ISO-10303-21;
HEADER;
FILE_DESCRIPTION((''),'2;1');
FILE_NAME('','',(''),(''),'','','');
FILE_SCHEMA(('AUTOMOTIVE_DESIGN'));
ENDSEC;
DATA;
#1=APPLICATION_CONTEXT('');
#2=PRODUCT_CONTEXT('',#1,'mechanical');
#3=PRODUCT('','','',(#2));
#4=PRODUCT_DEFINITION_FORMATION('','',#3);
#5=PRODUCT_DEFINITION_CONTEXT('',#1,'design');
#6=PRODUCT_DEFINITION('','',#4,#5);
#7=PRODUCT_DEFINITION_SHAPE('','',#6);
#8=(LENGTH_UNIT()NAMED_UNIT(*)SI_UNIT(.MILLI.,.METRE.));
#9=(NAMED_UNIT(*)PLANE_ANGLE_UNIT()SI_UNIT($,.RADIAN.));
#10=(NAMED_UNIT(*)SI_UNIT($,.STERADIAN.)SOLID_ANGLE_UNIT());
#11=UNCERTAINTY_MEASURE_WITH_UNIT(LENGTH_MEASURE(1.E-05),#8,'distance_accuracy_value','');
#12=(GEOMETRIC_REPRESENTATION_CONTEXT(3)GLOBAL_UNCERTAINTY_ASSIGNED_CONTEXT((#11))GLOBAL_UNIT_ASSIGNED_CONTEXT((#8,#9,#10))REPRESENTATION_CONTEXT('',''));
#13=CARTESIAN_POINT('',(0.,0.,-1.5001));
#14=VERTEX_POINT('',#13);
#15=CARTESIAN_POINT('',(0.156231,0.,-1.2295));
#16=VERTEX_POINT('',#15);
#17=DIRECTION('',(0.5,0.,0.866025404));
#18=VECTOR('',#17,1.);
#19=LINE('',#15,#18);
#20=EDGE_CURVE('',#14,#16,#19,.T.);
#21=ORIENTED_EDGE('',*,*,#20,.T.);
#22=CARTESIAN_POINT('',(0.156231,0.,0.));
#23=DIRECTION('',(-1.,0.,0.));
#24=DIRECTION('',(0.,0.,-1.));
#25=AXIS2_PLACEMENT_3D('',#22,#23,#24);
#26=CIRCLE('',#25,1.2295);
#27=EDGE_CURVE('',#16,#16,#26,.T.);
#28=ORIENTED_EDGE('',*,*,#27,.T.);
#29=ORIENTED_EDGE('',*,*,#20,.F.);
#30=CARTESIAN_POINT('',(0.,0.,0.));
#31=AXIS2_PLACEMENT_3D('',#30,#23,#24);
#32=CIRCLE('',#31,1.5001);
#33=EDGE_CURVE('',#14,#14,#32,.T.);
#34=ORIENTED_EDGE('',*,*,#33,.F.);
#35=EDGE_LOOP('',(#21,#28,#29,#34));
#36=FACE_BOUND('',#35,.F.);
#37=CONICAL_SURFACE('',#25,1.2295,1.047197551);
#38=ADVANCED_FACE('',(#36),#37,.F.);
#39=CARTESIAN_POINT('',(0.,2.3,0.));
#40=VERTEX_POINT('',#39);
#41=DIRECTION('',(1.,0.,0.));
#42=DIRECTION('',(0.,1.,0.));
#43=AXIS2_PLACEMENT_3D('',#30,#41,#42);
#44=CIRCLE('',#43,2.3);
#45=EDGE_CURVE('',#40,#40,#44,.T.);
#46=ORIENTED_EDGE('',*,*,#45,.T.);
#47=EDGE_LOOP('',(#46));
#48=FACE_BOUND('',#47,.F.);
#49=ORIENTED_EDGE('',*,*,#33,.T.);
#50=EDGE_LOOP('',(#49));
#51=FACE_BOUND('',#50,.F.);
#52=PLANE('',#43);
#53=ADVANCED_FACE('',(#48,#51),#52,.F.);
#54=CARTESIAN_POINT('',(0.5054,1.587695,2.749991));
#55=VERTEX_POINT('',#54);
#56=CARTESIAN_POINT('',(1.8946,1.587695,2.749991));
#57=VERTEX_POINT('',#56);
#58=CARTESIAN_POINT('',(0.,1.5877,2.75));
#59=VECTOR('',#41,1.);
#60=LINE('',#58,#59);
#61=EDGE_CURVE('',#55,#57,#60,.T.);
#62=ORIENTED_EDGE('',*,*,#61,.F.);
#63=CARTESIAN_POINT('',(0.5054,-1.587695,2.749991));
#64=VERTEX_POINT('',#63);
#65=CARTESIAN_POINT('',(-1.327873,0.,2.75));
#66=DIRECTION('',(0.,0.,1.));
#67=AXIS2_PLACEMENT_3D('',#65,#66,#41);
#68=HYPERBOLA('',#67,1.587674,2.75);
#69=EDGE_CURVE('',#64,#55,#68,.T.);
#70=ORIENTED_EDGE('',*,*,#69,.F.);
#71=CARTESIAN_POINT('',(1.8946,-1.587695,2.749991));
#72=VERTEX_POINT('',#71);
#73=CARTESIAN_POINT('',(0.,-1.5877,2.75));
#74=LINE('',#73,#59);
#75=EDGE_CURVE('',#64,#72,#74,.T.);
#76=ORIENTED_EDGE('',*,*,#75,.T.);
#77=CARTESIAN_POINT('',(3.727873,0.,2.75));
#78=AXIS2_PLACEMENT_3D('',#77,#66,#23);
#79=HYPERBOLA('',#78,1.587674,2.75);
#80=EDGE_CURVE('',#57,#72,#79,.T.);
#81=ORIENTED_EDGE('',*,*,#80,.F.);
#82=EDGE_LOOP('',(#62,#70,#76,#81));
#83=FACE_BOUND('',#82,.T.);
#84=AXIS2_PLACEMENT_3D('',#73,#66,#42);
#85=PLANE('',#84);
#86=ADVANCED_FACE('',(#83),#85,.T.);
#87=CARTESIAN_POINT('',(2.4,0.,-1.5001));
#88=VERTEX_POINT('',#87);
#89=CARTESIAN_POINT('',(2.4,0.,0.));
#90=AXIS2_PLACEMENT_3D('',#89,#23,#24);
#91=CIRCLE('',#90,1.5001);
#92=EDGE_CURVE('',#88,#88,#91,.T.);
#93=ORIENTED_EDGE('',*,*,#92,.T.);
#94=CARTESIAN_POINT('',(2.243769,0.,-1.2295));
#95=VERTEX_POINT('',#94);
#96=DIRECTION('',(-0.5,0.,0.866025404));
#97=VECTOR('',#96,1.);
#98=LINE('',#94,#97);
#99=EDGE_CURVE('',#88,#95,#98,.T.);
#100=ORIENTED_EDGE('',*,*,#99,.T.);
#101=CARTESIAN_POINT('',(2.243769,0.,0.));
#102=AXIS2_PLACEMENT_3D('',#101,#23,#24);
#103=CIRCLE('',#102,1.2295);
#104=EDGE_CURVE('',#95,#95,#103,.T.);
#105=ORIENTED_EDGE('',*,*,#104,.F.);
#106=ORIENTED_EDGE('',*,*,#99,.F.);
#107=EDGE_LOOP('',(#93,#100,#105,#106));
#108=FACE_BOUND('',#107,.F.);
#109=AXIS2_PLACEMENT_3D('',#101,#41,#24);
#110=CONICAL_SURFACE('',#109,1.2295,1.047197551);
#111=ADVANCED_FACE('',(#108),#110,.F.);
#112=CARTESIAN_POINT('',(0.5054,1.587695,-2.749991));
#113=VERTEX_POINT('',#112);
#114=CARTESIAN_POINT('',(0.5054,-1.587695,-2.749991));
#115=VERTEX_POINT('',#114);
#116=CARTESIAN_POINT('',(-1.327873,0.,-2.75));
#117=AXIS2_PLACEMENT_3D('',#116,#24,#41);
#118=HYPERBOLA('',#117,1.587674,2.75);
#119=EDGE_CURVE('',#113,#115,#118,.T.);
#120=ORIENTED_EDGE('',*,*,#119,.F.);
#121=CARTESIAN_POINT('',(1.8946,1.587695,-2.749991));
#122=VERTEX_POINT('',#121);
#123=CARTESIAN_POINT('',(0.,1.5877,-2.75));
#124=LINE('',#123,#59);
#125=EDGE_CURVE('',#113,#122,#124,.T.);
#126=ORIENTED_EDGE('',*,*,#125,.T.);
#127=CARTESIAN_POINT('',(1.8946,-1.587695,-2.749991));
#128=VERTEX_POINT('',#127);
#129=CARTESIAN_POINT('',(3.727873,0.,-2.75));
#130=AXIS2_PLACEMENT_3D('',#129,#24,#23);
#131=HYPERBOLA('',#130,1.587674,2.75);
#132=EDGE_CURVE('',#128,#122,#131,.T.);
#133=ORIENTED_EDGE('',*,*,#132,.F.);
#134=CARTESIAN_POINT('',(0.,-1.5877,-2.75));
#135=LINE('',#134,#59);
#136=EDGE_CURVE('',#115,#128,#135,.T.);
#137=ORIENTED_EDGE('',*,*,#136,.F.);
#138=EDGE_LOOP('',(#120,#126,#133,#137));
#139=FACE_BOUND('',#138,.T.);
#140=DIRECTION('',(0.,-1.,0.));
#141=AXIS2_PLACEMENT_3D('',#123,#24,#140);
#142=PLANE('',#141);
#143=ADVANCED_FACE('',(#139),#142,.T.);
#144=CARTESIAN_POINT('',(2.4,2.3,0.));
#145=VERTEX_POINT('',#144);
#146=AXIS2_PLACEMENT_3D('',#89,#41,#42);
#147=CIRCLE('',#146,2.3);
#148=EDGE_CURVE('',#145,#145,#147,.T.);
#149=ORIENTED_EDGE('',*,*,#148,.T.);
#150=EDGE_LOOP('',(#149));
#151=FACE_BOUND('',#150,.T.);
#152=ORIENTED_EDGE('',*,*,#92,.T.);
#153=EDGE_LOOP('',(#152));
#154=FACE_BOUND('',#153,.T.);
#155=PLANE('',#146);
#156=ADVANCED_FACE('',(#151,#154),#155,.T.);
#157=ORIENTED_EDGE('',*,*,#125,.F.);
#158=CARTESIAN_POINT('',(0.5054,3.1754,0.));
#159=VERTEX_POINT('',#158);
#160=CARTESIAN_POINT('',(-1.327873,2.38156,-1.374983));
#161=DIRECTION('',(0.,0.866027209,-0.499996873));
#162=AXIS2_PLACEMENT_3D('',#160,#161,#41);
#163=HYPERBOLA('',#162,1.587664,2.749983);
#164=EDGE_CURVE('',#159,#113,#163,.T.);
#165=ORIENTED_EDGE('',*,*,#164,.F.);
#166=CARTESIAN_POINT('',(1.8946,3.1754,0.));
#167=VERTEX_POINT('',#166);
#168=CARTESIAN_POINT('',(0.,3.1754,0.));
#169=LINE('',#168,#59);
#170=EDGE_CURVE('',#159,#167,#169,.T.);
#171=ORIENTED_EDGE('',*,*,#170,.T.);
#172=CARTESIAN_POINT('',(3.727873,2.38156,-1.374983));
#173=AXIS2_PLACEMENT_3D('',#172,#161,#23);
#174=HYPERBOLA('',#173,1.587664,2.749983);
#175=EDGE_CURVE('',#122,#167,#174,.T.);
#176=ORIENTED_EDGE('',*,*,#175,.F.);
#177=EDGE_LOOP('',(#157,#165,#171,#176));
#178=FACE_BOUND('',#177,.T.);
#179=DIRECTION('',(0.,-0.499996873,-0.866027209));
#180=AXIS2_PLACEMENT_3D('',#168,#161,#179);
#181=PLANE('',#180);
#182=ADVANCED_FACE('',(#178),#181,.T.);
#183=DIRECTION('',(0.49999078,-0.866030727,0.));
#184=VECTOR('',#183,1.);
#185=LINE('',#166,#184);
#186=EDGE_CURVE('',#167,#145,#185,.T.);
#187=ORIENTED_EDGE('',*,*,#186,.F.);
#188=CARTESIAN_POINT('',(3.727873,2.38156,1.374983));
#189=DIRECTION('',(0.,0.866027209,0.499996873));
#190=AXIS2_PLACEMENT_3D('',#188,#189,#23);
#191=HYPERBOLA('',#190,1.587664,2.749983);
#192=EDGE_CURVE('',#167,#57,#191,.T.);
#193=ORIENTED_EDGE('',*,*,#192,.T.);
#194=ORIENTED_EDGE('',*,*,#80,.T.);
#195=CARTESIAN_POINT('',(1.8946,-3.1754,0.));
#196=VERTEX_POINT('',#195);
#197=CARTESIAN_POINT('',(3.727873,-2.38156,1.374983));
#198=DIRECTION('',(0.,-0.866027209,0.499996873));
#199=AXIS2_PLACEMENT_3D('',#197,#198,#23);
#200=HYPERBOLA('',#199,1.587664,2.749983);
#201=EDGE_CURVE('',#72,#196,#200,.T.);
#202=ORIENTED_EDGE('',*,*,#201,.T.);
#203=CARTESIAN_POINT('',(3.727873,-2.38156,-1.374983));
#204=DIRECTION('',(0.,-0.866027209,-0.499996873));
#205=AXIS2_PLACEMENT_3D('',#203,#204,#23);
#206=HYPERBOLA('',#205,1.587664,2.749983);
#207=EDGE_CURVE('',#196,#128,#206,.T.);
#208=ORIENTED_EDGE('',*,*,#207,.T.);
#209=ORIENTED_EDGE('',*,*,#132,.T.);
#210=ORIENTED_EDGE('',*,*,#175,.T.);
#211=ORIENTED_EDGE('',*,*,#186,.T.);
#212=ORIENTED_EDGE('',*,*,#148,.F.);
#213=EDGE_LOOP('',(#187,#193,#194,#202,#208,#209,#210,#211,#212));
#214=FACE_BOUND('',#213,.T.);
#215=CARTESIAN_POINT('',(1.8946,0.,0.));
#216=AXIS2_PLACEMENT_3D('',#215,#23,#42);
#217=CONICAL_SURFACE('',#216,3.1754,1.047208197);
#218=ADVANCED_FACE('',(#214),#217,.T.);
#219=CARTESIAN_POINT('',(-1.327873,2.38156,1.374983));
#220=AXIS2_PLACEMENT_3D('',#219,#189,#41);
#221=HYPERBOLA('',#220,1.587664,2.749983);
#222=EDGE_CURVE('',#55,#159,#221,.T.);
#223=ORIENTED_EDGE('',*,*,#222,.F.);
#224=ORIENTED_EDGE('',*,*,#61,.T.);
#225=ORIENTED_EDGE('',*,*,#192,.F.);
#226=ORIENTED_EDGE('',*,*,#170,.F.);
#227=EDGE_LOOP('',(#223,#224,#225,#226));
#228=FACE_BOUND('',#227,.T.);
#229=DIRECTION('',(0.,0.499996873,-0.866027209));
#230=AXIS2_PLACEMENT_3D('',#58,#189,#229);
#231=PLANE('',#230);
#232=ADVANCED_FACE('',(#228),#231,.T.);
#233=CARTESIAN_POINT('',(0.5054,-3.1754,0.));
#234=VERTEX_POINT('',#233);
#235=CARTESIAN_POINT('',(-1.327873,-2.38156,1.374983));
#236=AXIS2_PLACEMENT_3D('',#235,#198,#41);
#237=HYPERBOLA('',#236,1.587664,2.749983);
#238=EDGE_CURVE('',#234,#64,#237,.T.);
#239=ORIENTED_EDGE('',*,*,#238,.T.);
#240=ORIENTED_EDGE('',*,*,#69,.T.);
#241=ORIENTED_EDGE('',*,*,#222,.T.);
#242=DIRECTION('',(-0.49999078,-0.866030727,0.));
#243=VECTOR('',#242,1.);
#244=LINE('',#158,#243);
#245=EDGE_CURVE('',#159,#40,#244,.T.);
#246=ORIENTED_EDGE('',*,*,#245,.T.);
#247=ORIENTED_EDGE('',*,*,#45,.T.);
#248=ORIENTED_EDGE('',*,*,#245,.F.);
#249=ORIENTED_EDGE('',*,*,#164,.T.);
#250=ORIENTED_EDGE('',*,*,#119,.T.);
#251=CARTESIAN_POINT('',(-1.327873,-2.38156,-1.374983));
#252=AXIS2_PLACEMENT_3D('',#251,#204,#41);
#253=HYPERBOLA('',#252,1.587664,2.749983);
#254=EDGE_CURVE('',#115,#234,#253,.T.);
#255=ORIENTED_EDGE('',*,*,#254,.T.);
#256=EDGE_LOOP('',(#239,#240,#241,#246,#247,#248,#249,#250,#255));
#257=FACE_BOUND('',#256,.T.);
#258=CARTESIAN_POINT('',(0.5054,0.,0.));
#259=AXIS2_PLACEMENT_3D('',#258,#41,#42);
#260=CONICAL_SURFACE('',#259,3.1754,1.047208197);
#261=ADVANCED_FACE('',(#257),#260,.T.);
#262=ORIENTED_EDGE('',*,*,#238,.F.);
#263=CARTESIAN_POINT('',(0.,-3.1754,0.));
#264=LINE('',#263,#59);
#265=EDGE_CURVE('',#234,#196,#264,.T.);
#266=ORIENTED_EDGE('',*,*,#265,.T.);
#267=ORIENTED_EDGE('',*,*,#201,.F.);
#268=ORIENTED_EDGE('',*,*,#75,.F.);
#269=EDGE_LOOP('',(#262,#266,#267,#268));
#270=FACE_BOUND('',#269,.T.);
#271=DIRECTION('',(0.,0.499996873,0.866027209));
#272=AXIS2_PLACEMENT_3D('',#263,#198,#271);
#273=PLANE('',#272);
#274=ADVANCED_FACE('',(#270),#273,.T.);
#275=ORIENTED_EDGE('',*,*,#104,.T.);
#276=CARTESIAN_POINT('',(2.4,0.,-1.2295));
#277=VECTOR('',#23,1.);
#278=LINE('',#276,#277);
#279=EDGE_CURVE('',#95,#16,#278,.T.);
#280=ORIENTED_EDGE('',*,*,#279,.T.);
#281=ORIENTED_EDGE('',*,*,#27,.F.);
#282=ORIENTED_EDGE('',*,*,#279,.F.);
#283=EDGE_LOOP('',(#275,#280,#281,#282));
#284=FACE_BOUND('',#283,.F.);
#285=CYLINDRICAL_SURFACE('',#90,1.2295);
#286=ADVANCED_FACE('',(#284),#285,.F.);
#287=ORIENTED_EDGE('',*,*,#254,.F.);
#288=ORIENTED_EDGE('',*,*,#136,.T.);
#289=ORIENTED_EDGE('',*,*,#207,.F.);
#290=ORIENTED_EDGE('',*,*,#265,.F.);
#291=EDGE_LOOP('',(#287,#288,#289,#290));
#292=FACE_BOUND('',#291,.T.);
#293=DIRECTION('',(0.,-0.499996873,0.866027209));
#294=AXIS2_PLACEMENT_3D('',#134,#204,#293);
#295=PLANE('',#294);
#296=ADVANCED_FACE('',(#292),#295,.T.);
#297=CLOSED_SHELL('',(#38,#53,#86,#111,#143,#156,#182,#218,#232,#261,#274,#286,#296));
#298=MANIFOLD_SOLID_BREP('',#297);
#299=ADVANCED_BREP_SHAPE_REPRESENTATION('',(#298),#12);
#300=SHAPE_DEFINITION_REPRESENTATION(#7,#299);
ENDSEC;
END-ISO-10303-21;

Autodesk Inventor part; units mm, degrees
ref_plane "YZ Plane" through (0, 0, 0) normal (1, 0, 0) x (0, 1, 0)
ref_plane "XZ Plane" through (0, 0, 0) normal (0, 1, 0) x (-1, 0, 0)
sketch "Sketch1" plane through (0, 0, 0) normal (1, 0, 0) x (0, 1, 0)
  line L0 (-3.1754, 0) -> (-1.5877, 2.75)
  line L1 (-1.5877, 2.75) -> (1.5877, 2.75)
  line L2 (1.5877, 2.75) -> (3.1754, 0)
  line L3 (3.1754, 0) -> (1.5877, -2.75)
  line L4 (1.5877, -2.75) -> (-1.5877, -2.75)
  line L5 (-1.5877, -2.75) -> (-3.1754, 0)
  point P0 (0, 0)
  point P1 (0, 0)
  dimension "d0" = 6.3509
extrude "Body" add sketch "Sketch1" along normal blind 2.4
sketch "Sketch2" plane through (0, 0, 0) normal (0, 0, 1) x (1, 0, 0)
  line L0 (0, 1.5877) -> (0, 3.1754) projected
  line L1 (0, 3.1754) -> (2.4, 3.1754) projected
  line L2 (2.4, 1.5877) -> (2.4, 3.1754) projected
  line L3 (-0.48, 0) -> (2.88, 0) projected
  line L4 (0.5054, 3.1754) -> (0, 2.3)
  line L5 (1.8946, 3.1754) -> (2.4, 2.3)
  dimension "d3" = 30
  dimension "d4" = 30
  dimension "d5" = 4.6
  dimension "d6" = 4.6
revolve "Chamfer1" cut sketch "Sketch2" angle 360 about axis through (-10, 0, 0) along (1, 0, 0)
sketch "Sketch3" plane through (2.4, 0, 0) normal (1, 0, 0) x (0, 0, -1)
  arc A0 (-0.625, -1.0825) -> (0.625, -1.0825) centre (0, 0) ccw projected
hole "Thread" at (2.4, 0, 0) direction (-1, 0, 0) diameter 2.459 end through all thread size "M3x0.5" class "6H" standard "ISO Metric profile"
chamfer "Chamfer2" distance 0.2706 angle 30 1 edges at (2.4, 0, 1.2295) measured on face at (2.4, 1.9179, -0.2329)
chamfer "Chamfer3" distance 0.2706 angle 30 1 edges at (0, 0, 1.2295) measured on face at (0, 1.9179, -0.2329)
ref_plane "Work Plane1" through (-6.3375, 0, 0) normal (0, -0.8660254, -0.5) x (1, 0, 0)
equation "\"d0\" = 1.1547 * SW"
equation "\"d1\" = KOH"
equation "\"d3\" = ANG1"
equation "\"d4\" = ANG2"
equation "\"d5\" = SW0"
equation "\"d6\" = SW01"
equation "\"d8\" = -0.5 * GD1 + 0.5 * NND"
equation "\"d40\" = -0.5 * GD1 + 0.5 * NND"
equation "\"d10\" = -0.5 * GD1 + 0.5 * NND"
equation "\"d41\" = -0.5 * GD1 + 0.5 * NND"
equation "\"ANG1\" = 30deg"
equation "\"ANG2\" = 30deg"
equation "\"NND\" = 3"
equation "\"KOH\" = 2.4"
equation "\"SW\" = 5.5"
equation "\"SW0\" = 4.6"
equation "\"SW01\" = 4.6"
equation "\"GUL\" = 0.541266 * PTC"
equation "\"THREADDIA\" = 3"
equation "\"TOA\" = 30deg"
equation "\"PTC\" = 0.5"
equation "\"E0\" = 1.155 * SW"
equation "\"GAL\" = 0.541266 * PTC"
equation "\"GD1\" = 2.458734"
properties part number "M3 nut nickel plated" material "Stainless Steel, 440C"
